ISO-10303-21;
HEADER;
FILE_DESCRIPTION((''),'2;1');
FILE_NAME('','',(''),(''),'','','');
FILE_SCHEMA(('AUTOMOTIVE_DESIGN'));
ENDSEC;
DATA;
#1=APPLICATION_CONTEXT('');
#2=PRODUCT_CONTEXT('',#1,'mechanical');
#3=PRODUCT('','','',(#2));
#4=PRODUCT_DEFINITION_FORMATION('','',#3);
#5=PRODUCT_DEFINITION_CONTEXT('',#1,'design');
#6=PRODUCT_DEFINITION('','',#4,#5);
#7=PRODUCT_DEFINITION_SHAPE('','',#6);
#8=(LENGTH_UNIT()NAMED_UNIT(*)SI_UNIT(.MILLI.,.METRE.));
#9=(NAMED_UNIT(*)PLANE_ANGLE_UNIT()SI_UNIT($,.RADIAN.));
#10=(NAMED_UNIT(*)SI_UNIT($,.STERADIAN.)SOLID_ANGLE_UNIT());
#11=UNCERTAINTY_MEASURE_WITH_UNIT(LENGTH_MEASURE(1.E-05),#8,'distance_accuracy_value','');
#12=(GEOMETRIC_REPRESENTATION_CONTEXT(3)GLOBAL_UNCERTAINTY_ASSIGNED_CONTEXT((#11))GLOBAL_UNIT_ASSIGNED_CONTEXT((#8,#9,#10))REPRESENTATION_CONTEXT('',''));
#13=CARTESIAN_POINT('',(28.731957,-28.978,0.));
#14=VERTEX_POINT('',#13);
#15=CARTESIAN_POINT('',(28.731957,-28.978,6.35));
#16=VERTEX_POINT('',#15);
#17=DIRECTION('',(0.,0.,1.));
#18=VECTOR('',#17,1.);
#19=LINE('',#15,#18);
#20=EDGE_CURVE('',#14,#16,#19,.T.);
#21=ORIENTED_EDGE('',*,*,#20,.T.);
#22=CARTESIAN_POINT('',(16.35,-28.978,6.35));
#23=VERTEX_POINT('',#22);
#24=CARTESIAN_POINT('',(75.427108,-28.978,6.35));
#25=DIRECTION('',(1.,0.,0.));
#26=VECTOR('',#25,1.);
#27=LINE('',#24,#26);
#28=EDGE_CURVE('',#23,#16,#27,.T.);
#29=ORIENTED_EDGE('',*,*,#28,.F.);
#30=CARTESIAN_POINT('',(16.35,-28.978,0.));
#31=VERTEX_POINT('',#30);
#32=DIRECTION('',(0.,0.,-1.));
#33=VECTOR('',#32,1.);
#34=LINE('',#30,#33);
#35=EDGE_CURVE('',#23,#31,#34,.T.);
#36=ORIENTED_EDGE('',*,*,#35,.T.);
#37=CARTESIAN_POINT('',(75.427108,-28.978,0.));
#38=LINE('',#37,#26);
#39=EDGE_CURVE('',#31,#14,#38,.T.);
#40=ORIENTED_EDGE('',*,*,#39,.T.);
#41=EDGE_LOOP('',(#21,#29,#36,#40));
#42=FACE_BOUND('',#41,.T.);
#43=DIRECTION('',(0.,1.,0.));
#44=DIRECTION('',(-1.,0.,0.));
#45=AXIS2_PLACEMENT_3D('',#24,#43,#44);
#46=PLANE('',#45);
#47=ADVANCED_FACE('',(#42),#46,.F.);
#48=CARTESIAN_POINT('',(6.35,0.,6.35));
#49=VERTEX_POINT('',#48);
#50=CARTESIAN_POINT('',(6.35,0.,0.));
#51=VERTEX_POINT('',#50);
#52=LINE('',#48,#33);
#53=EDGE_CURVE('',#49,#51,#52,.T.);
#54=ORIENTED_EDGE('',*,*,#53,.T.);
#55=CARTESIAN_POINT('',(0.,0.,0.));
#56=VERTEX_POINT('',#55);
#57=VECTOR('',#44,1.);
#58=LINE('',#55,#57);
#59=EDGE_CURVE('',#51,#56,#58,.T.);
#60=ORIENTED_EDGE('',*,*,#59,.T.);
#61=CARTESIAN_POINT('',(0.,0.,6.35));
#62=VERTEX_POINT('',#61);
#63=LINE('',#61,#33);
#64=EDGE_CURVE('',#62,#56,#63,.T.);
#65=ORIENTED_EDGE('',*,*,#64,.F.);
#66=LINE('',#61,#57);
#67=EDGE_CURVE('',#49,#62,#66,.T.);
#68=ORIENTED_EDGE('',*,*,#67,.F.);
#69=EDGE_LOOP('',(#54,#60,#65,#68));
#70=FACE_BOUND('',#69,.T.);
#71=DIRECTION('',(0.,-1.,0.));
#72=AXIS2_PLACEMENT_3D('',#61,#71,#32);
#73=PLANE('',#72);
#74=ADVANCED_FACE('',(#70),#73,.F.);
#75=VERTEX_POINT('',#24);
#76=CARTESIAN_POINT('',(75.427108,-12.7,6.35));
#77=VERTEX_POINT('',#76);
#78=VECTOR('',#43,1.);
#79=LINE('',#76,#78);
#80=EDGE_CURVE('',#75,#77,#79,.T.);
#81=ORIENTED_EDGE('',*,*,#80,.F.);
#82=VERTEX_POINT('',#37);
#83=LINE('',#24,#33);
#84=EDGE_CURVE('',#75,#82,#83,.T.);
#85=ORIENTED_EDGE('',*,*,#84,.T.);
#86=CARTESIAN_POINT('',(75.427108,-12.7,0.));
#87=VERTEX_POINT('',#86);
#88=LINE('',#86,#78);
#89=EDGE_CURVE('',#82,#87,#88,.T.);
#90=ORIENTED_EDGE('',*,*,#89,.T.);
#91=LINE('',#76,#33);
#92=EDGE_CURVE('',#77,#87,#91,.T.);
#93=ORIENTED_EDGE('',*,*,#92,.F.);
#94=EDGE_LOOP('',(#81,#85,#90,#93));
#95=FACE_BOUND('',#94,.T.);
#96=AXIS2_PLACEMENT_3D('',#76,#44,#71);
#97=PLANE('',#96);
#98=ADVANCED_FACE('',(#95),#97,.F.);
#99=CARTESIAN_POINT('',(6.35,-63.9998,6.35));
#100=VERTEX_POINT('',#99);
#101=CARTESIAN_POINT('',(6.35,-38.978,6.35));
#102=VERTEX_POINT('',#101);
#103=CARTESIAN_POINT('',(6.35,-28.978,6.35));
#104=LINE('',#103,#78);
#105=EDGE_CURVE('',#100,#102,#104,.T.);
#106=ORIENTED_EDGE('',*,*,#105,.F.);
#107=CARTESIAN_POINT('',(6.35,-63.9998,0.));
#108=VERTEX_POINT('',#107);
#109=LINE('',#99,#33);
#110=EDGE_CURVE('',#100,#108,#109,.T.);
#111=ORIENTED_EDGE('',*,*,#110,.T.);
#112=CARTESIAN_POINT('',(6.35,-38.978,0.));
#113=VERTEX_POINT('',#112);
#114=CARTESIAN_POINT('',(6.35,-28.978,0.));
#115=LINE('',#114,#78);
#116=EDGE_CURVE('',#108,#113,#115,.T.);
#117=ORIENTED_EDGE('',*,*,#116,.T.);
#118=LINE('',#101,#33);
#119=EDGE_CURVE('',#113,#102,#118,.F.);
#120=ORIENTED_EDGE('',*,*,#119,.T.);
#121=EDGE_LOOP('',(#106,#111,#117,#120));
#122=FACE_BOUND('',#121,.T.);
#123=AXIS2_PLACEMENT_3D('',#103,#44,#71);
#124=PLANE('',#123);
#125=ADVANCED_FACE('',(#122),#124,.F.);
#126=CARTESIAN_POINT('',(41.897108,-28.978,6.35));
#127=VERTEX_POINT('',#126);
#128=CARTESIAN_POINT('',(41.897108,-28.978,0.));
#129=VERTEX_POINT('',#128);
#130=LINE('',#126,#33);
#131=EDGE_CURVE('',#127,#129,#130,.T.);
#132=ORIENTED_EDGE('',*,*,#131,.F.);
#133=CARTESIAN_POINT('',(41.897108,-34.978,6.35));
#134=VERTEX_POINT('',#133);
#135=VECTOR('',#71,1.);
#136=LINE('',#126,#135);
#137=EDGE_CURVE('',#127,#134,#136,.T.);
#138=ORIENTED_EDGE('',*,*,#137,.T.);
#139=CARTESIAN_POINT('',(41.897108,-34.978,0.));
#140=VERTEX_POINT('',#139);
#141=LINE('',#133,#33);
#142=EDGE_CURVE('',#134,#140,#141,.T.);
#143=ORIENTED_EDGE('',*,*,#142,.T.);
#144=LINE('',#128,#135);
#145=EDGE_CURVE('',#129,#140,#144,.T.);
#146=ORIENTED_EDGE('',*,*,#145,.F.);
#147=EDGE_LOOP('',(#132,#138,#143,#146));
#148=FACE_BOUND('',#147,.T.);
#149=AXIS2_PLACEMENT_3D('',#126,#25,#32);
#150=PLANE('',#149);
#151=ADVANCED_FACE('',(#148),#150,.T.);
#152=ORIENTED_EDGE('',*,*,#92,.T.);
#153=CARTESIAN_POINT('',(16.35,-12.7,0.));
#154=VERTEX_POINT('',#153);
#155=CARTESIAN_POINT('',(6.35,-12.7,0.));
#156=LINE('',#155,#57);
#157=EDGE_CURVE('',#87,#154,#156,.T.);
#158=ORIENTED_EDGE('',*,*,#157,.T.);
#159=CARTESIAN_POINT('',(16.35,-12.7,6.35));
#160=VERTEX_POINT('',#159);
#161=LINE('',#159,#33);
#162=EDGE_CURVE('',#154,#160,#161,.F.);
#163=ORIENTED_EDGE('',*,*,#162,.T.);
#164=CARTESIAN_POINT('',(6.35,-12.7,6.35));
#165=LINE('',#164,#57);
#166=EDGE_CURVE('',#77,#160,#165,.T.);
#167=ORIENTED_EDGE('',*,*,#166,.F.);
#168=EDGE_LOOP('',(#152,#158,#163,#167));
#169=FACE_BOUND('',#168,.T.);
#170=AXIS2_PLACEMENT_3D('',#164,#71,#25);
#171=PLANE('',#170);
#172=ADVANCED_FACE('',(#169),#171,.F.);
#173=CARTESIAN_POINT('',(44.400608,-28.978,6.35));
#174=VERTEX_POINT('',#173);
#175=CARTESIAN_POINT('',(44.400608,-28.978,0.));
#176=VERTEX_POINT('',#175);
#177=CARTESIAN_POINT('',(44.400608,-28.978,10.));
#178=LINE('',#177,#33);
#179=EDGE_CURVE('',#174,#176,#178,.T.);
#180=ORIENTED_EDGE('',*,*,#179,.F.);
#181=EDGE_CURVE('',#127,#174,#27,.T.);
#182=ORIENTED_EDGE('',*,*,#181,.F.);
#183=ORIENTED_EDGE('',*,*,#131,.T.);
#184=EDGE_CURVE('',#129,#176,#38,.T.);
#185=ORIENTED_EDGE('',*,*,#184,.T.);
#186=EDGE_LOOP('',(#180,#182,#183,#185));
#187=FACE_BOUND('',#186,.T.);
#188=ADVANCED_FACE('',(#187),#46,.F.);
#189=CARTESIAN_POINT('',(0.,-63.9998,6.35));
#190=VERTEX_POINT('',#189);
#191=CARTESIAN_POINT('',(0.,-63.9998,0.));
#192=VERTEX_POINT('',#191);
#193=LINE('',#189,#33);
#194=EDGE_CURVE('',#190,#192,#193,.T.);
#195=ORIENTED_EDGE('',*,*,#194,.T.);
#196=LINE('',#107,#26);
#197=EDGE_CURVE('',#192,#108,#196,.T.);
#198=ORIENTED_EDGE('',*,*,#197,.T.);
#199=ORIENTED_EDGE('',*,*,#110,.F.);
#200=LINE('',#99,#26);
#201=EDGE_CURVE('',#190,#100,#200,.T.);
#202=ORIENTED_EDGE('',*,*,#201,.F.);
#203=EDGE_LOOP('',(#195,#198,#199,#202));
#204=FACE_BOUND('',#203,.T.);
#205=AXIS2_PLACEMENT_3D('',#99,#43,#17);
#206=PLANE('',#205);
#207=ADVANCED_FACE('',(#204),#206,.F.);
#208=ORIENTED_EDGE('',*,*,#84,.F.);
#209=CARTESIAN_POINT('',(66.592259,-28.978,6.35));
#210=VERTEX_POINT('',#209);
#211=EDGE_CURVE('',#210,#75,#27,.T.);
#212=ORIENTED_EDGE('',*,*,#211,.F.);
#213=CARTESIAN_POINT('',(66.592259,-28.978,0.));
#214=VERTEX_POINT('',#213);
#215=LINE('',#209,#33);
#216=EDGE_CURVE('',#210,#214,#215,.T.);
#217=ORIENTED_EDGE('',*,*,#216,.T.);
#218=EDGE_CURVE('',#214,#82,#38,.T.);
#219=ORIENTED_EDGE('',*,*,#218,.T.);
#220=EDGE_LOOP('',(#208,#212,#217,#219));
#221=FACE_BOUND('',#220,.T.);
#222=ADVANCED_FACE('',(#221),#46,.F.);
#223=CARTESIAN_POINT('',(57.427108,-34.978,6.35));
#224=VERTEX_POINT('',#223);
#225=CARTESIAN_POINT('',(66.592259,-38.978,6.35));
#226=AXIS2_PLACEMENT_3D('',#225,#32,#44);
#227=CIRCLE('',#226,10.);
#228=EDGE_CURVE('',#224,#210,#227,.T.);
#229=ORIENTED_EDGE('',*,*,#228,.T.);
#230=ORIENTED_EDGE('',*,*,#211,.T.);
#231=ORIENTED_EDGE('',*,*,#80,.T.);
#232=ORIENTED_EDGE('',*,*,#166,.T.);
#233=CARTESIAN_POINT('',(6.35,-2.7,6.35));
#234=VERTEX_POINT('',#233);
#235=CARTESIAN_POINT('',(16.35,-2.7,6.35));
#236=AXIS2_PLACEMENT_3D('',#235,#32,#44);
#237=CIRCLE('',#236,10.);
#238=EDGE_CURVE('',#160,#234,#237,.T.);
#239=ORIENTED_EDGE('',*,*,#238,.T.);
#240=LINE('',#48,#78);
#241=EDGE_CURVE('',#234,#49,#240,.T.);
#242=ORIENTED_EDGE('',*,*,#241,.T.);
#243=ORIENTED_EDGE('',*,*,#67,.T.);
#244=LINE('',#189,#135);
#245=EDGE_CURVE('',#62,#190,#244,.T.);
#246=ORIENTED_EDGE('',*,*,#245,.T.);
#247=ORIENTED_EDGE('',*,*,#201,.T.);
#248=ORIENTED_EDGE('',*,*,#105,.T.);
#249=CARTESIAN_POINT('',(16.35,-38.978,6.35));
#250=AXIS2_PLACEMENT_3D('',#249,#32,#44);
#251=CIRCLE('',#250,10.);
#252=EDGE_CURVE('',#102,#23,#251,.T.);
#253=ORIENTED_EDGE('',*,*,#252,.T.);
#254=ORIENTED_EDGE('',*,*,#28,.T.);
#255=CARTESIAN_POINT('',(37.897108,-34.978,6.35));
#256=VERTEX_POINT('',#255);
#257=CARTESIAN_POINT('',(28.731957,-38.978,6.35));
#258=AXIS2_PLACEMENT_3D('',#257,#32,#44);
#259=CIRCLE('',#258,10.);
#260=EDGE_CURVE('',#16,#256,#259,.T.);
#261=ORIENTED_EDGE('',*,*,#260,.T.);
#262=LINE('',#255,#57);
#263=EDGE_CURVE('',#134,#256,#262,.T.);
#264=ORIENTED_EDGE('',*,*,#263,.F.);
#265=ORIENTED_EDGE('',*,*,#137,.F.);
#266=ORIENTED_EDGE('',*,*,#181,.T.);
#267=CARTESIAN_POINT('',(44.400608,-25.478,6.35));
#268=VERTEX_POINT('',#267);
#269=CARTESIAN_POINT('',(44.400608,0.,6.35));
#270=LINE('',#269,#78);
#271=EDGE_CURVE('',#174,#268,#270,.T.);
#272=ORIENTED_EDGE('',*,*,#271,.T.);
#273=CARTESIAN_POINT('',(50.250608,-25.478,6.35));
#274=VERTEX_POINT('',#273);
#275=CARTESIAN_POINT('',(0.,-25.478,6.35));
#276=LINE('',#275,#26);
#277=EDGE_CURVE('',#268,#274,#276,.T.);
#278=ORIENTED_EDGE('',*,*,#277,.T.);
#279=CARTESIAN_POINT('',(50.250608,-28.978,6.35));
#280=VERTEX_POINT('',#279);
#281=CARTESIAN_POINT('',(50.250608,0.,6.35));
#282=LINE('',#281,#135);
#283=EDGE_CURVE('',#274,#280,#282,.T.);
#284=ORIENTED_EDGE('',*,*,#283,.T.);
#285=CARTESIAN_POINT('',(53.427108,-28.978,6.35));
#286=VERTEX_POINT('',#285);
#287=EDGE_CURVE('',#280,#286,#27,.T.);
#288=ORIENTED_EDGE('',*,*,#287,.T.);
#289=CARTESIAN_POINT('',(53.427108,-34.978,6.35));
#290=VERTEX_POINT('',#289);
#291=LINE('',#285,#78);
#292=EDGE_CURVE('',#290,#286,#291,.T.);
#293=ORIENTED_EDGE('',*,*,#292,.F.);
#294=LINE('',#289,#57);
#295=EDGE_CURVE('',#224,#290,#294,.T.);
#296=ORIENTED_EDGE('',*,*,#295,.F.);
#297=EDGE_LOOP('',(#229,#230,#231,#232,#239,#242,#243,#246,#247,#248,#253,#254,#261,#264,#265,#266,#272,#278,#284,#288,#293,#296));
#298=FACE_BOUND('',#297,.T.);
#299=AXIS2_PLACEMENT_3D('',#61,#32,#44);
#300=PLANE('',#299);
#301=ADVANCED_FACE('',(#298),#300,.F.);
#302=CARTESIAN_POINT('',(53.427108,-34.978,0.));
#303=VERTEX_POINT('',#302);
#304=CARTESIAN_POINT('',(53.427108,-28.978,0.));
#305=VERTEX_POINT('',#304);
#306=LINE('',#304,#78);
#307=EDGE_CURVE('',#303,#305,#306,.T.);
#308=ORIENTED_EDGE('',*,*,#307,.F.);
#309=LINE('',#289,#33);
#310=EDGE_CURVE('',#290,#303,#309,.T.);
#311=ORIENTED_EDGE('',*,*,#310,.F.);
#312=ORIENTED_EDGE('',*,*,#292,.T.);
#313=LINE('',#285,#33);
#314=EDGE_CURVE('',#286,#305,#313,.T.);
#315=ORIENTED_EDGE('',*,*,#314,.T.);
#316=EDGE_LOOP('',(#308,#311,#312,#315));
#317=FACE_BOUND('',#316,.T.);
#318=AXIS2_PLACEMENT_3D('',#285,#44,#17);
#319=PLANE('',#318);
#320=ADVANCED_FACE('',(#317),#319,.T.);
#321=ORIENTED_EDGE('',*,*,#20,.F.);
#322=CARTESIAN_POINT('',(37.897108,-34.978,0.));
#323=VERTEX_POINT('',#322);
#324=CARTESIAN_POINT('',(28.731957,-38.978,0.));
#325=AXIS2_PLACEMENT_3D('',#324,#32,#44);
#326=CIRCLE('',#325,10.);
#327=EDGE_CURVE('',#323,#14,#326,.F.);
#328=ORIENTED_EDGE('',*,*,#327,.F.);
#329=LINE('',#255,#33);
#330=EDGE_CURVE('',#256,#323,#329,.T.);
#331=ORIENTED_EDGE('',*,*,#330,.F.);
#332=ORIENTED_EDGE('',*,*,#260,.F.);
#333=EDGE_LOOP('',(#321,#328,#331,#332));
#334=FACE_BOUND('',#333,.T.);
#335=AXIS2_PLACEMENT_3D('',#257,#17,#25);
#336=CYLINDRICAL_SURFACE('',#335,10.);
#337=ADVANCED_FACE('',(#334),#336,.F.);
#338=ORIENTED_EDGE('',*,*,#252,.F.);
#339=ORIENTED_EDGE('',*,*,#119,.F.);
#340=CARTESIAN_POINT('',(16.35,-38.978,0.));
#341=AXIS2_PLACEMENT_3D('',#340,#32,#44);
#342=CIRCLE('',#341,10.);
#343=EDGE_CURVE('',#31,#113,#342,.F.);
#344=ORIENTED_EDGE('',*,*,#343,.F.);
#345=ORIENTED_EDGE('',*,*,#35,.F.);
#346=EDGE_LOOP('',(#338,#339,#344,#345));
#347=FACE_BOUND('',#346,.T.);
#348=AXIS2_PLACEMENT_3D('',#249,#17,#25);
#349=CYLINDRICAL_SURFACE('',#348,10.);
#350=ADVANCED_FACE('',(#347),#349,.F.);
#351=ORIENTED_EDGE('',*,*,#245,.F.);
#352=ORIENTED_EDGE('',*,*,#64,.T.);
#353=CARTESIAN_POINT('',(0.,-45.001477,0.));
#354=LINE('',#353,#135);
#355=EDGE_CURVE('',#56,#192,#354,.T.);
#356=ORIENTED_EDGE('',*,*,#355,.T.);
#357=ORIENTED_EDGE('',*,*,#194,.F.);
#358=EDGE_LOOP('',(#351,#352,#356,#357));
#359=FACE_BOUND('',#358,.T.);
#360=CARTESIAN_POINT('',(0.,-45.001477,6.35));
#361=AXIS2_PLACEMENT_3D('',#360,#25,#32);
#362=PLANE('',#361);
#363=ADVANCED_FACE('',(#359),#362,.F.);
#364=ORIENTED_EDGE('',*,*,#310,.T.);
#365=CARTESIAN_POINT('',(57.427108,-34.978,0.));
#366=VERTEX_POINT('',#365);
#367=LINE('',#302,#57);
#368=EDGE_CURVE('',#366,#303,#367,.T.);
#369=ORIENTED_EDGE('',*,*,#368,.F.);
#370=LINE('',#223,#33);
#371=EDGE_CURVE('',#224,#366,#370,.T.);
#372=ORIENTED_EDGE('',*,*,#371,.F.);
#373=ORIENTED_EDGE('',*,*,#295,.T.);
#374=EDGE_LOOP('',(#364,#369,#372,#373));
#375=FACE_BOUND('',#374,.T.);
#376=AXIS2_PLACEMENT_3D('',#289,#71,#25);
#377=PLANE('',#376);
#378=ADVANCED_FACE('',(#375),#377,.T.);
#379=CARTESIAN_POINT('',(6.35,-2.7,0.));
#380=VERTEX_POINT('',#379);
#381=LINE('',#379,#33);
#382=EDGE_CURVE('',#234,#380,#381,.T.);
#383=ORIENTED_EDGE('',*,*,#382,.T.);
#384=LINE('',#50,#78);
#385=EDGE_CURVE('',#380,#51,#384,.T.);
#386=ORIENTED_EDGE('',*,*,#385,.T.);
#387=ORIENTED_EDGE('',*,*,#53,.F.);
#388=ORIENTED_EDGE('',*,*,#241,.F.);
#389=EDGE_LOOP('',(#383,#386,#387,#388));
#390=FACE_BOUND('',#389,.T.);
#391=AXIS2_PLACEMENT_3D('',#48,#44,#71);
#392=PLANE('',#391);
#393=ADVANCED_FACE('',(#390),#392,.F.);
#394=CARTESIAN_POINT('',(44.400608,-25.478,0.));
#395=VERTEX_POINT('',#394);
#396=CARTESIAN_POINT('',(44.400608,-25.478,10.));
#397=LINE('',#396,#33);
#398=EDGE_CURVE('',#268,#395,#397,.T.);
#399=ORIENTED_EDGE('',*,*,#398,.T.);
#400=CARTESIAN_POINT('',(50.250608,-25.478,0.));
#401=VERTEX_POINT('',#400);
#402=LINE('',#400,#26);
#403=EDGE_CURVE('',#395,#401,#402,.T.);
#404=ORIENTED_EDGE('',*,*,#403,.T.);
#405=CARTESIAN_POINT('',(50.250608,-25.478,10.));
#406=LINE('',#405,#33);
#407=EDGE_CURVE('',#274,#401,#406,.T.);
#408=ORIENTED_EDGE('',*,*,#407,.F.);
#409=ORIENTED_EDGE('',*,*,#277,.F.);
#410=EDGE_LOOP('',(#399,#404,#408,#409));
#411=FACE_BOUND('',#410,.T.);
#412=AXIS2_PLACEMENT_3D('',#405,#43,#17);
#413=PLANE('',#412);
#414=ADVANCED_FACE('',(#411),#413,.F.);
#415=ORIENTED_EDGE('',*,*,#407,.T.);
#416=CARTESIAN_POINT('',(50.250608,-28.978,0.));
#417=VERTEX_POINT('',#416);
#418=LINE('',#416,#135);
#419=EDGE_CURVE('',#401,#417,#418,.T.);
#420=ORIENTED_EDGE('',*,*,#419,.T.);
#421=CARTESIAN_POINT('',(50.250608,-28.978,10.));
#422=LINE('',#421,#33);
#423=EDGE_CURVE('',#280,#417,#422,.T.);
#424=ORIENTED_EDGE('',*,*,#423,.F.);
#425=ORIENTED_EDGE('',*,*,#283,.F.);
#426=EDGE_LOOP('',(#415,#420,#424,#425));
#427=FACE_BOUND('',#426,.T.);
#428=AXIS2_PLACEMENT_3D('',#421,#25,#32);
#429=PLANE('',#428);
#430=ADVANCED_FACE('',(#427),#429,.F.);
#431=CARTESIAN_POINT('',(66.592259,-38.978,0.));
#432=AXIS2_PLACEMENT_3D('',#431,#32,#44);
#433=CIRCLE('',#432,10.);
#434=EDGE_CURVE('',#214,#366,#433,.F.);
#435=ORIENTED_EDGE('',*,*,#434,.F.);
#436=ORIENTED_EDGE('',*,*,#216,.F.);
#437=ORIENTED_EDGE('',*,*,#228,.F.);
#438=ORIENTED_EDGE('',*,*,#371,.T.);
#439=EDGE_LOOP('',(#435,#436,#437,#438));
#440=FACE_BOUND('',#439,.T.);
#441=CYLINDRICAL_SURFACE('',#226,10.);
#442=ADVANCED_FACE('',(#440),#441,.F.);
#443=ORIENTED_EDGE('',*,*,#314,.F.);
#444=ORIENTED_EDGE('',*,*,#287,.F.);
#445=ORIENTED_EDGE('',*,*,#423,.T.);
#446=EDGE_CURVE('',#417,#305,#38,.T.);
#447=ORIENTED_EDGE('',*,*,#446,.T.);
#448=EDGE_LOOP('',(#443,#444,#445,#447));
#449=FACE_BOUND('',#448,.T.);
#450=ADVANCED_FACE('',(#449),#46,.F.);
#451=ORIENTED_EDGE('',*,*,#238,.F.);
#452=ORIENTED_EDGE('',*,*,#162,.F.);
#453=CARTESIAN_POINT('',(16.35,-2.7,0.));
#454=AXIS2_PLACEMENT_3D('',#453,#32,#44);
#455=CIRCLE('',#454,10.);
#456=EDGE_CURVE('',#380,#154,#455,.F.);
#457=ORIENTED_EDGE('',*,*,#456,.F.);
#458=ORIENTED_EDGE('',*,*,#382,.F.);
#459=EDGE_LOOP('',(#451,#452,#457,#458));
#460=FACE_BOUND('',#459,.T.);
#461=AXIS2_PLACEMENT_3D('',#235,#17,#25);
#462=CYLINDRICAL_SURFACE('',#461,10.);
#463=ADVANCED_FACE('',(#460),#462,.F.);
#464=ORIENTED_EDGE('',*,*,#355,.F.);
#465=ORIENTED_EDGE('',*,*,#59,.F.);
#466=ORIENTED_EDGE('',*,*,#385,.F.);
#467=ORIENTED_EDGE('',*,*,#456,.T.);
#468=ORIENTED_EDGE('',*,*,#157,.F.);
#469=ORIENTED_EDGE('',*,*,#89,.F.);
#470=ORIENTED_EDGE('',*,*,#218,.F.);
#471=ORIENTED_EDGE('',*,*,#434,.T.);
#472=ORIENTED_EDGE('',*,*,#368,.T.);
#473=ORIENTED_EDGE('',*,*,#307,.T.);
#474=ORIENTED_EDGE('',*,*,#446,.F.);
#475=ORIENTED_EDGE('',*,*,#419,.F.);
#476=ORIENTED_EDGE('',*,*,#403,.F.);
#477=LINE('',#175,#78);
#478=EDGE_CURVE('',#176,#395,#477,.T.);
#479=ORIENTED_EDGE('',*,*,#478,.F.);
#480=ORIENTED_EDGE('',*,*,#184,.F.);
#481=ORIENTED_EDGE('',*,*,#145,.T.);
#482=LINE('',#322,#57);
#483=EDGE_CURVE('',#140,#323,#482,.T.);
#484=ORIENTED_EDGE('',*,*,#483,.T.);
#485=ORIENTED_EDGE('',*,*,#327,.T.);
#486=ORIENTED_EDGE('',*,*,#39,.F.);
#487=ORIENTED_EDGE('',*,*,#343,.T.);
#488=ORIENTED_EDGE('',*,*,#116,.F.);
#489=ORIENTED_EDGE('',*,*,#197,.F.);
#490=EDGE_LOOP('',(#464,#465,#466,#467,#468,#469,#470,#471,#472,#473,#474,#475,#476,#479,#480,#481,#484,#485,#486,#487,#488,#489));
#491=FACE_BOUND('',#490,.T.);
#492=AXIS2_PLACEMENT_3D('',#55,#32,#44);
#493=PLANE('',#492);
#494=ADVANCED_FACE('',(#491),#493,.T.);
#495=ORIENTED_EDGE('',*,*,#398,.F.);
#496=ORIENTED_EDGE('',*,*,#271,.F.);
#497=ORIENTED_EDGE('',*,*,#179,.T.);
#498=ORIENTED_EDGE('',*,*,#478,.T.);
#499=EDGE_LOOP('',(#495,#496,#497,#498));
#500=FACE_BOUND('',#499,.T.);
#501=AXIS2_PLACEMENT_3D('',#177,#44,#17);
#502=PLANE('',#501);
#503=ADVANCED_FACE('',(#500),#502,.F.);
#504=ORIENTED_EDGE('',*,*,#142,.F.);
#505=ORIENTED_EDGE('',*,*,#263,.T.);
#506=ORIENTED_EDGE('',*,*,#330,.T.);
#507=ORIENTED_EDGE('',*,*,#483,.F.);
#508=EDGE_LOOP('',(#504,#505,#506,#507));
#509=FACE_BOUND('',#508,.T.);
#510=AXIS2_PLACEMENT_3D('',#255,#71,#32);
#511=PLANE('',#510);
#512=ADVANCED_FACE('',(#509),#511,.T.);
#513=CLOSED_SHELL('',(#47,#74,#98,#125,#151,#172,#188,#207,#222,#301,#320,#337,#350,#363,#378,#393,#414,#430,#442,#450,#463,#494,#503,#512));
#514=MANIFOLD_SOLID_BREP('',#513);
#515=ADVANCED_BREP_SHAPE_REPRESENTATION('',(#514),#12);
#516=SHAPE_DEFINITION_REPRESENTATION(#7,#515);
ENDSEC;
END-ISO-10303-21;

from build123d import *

# Parameters (mm, degrees)
BOSS_EXTRUDE1_DEPTH = 6.35
FILLET1_R           = 10
SKETCH3_W           = 4
SKETCH3_H           = 6
BOSS_EXTRUDE2_DEPTH = 6.35
FILLET2_R           = 10
SKETCH4_W           = 5.85
SKETCH4_H           = 3.5
CUT_EXTRUDE1_DEPTH  = 10


with BuildPart() as part:
    # Sketch2 → Boss-Extrude1 (new body)
    with BuildSketch(Plane.XY):
        Polygon((0, -45.00147748), (0, 0), (6.35, 0), (6.35, -12.7), (75.42710801, -12.7), (75.42710801, -28.978), (6.35, -28.978), (6.35, -63.9998), (0, -63.9998), align=None)
    extrude(amount=BOSS_EXTRUDE1_DEPTH)

    # Fillet1
    fillet1_edges = [part.edges().sort_by_distance(p)[0] for p in [
        (6.35, -12.7, 3.175),
        (6.35, -28.978, 3.175),
    ]]
    fillet(fillet1_edges, radius=FILLET1_R)

    # Sketch3 → Boss-Extrude2 (add)
    with BuildSketch(Plane(origin=(0, 0, 0), x_dir=(-1, 0, 0), z_dir=(0, 0, -1))):
        with Locations((-39.89710801, -31.978)):
            Rectangle(SKETCH3_W, SKETCH3_H)
        with Locations((-55.42710801, -31.978)):
            Rectangle(SKETCH3_W, SKETCH3_H)
    extrude(amount=-BOSS_EXTRUDE2_DEPTH)

    # Fillet2
    # the kernel refuses this fillet: 10 mm, written as the material it adds along each edge
    with BuildSketch(Plane(origin=(57.42710801, -28.978, 0), x_dir=(1, 0, 0), z_dir=(0, 0, 1))) as fillet2_piece_1:
        with BuildLine():
            CenterArc((9.16515139, -10), FILLET2_R, 90, 66.421821522)
            Line((0, -6), (-0.183303028, -5.92))
            ThreePointArc((-0.183303028, -5.92), (-0.2, -3), (-0.2, 0))
            Line((-0.2, 0), (0, 0.2))
            Line((0, 0.2), (9.16515139, 0.2))
            Line((9.16515139, 0.2), (9.16515139, 0))
        make_face()
    extrude(amount=6.35)
    with BuildSketch(Plane(origin=(37.89710801, -28.978, 0), x_dir=(-1, 0, 0), z_dir=(0, 0, 1))) as fillet2_piece_2:
        with BuildLine():
            CenterArc((9.16515139, 10), FILLET2_R, 203.578178478, 66.421821522)
            Line((0, 6), (-0.183303028, 5.92))
            ThreePointArc((-0.183303028, 5.92), (-0.2, 3), (-0.2, 0))
            Line((-0.2, 0), (0, -0.2))
            Line((0, -0.2), (9.16515139, -0.2))
            Line((9.16515139, -0.2), (9.16515139, 0))
        make_face()
    extrude(amount=6.35)

    # Sketch4 → Cut-Extrude1 (cut)
    with BuildSketch(Plane(origin=(0, 0, 0), x_dir=(-1, 0, 0), z_dir=(0, 0, -1))):
        with Locations((-47.32560801, -27.228)):
            Rectangle(SKETCH4_W, SKETCH4_H)
    extrude(amount=-CUT_EXTRUDE1_DEPTH, mode=Mode.SUBTRACT)


solid = part.part
